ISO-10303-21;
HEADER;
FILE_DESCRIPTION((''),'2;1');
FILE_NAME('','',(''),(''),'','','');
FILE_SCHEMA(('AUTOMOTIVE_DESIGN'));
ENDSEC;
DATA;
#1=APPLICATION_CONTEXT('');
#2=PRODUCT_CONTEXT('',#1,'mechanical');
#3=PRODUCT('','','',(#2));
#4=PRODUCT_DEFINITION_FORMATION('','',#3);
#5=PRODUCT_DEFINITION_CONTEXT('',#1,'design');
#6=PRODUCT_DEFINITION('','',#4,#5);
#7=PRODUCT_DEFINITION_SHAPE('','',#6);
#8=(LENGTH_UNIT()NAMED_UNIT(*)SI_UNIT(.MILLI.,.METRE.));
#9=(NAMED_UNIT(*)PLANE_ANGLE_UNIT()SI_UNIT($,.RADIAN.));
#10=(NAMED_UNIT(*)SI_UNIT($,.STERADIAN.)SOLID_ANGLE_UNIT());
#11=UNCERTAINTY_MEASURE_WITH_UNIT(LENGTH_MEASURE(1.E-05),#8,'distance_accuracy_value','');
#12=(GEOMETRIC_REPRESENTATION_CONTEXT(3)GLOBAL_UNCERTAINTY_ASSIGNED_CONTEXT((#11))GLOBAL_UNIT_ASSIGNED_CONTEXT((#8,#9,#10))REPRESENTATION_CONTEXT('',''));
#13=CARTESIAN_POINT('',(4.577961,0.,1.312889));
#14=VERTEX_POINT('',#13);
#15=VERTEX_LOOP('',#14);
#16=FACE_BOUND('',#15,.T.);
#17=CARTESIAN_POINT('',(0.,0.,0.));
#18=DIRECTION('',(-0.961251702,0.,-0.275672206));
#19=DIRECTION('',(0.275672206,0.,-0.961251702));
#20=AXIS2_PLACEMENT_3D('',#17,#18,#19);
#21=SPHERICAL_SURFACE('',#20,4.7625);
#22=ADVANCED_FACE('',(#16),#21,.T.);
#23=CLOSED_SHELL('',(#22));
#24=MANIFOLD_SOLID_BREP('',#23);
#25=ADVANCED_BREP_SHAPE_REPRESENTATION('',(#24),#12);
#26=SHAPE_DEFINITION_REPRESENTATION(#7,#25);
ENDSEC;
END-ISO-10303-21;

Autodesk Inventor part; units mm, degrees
ref_plane "YZ Plane" through (0, 0, 0) normal (1, 0, 0) x (0, 1, 0)
ref_plane "XZ Plane" through (0, 0, 0) normal (0, 1, 0) x (-1, 0, 0)
ref_plane "XY Plane" through (0, 0, 0) normal (0, 0, 1) x (1, 0, 0)
sketch "Skizze1" plane through (0, 0, 0) normal (0, 1, 0) x (-1, 0, 0)
  circle A0 centre (0, 0) radius 4.7625
  line L0 (-4.578, 1.3129) -> (4.578, -1.3129)
  dimension "d0" = 9.525
revolve "Umdrehung1" add sketch "Skizze1" angle 360 about axis through (4.578, 0, 1.3129) along (-0.9612497, 0, -0.2756792) picked at (-1.6419, -1.4147) contours L0 A0
properties part number "ball"
